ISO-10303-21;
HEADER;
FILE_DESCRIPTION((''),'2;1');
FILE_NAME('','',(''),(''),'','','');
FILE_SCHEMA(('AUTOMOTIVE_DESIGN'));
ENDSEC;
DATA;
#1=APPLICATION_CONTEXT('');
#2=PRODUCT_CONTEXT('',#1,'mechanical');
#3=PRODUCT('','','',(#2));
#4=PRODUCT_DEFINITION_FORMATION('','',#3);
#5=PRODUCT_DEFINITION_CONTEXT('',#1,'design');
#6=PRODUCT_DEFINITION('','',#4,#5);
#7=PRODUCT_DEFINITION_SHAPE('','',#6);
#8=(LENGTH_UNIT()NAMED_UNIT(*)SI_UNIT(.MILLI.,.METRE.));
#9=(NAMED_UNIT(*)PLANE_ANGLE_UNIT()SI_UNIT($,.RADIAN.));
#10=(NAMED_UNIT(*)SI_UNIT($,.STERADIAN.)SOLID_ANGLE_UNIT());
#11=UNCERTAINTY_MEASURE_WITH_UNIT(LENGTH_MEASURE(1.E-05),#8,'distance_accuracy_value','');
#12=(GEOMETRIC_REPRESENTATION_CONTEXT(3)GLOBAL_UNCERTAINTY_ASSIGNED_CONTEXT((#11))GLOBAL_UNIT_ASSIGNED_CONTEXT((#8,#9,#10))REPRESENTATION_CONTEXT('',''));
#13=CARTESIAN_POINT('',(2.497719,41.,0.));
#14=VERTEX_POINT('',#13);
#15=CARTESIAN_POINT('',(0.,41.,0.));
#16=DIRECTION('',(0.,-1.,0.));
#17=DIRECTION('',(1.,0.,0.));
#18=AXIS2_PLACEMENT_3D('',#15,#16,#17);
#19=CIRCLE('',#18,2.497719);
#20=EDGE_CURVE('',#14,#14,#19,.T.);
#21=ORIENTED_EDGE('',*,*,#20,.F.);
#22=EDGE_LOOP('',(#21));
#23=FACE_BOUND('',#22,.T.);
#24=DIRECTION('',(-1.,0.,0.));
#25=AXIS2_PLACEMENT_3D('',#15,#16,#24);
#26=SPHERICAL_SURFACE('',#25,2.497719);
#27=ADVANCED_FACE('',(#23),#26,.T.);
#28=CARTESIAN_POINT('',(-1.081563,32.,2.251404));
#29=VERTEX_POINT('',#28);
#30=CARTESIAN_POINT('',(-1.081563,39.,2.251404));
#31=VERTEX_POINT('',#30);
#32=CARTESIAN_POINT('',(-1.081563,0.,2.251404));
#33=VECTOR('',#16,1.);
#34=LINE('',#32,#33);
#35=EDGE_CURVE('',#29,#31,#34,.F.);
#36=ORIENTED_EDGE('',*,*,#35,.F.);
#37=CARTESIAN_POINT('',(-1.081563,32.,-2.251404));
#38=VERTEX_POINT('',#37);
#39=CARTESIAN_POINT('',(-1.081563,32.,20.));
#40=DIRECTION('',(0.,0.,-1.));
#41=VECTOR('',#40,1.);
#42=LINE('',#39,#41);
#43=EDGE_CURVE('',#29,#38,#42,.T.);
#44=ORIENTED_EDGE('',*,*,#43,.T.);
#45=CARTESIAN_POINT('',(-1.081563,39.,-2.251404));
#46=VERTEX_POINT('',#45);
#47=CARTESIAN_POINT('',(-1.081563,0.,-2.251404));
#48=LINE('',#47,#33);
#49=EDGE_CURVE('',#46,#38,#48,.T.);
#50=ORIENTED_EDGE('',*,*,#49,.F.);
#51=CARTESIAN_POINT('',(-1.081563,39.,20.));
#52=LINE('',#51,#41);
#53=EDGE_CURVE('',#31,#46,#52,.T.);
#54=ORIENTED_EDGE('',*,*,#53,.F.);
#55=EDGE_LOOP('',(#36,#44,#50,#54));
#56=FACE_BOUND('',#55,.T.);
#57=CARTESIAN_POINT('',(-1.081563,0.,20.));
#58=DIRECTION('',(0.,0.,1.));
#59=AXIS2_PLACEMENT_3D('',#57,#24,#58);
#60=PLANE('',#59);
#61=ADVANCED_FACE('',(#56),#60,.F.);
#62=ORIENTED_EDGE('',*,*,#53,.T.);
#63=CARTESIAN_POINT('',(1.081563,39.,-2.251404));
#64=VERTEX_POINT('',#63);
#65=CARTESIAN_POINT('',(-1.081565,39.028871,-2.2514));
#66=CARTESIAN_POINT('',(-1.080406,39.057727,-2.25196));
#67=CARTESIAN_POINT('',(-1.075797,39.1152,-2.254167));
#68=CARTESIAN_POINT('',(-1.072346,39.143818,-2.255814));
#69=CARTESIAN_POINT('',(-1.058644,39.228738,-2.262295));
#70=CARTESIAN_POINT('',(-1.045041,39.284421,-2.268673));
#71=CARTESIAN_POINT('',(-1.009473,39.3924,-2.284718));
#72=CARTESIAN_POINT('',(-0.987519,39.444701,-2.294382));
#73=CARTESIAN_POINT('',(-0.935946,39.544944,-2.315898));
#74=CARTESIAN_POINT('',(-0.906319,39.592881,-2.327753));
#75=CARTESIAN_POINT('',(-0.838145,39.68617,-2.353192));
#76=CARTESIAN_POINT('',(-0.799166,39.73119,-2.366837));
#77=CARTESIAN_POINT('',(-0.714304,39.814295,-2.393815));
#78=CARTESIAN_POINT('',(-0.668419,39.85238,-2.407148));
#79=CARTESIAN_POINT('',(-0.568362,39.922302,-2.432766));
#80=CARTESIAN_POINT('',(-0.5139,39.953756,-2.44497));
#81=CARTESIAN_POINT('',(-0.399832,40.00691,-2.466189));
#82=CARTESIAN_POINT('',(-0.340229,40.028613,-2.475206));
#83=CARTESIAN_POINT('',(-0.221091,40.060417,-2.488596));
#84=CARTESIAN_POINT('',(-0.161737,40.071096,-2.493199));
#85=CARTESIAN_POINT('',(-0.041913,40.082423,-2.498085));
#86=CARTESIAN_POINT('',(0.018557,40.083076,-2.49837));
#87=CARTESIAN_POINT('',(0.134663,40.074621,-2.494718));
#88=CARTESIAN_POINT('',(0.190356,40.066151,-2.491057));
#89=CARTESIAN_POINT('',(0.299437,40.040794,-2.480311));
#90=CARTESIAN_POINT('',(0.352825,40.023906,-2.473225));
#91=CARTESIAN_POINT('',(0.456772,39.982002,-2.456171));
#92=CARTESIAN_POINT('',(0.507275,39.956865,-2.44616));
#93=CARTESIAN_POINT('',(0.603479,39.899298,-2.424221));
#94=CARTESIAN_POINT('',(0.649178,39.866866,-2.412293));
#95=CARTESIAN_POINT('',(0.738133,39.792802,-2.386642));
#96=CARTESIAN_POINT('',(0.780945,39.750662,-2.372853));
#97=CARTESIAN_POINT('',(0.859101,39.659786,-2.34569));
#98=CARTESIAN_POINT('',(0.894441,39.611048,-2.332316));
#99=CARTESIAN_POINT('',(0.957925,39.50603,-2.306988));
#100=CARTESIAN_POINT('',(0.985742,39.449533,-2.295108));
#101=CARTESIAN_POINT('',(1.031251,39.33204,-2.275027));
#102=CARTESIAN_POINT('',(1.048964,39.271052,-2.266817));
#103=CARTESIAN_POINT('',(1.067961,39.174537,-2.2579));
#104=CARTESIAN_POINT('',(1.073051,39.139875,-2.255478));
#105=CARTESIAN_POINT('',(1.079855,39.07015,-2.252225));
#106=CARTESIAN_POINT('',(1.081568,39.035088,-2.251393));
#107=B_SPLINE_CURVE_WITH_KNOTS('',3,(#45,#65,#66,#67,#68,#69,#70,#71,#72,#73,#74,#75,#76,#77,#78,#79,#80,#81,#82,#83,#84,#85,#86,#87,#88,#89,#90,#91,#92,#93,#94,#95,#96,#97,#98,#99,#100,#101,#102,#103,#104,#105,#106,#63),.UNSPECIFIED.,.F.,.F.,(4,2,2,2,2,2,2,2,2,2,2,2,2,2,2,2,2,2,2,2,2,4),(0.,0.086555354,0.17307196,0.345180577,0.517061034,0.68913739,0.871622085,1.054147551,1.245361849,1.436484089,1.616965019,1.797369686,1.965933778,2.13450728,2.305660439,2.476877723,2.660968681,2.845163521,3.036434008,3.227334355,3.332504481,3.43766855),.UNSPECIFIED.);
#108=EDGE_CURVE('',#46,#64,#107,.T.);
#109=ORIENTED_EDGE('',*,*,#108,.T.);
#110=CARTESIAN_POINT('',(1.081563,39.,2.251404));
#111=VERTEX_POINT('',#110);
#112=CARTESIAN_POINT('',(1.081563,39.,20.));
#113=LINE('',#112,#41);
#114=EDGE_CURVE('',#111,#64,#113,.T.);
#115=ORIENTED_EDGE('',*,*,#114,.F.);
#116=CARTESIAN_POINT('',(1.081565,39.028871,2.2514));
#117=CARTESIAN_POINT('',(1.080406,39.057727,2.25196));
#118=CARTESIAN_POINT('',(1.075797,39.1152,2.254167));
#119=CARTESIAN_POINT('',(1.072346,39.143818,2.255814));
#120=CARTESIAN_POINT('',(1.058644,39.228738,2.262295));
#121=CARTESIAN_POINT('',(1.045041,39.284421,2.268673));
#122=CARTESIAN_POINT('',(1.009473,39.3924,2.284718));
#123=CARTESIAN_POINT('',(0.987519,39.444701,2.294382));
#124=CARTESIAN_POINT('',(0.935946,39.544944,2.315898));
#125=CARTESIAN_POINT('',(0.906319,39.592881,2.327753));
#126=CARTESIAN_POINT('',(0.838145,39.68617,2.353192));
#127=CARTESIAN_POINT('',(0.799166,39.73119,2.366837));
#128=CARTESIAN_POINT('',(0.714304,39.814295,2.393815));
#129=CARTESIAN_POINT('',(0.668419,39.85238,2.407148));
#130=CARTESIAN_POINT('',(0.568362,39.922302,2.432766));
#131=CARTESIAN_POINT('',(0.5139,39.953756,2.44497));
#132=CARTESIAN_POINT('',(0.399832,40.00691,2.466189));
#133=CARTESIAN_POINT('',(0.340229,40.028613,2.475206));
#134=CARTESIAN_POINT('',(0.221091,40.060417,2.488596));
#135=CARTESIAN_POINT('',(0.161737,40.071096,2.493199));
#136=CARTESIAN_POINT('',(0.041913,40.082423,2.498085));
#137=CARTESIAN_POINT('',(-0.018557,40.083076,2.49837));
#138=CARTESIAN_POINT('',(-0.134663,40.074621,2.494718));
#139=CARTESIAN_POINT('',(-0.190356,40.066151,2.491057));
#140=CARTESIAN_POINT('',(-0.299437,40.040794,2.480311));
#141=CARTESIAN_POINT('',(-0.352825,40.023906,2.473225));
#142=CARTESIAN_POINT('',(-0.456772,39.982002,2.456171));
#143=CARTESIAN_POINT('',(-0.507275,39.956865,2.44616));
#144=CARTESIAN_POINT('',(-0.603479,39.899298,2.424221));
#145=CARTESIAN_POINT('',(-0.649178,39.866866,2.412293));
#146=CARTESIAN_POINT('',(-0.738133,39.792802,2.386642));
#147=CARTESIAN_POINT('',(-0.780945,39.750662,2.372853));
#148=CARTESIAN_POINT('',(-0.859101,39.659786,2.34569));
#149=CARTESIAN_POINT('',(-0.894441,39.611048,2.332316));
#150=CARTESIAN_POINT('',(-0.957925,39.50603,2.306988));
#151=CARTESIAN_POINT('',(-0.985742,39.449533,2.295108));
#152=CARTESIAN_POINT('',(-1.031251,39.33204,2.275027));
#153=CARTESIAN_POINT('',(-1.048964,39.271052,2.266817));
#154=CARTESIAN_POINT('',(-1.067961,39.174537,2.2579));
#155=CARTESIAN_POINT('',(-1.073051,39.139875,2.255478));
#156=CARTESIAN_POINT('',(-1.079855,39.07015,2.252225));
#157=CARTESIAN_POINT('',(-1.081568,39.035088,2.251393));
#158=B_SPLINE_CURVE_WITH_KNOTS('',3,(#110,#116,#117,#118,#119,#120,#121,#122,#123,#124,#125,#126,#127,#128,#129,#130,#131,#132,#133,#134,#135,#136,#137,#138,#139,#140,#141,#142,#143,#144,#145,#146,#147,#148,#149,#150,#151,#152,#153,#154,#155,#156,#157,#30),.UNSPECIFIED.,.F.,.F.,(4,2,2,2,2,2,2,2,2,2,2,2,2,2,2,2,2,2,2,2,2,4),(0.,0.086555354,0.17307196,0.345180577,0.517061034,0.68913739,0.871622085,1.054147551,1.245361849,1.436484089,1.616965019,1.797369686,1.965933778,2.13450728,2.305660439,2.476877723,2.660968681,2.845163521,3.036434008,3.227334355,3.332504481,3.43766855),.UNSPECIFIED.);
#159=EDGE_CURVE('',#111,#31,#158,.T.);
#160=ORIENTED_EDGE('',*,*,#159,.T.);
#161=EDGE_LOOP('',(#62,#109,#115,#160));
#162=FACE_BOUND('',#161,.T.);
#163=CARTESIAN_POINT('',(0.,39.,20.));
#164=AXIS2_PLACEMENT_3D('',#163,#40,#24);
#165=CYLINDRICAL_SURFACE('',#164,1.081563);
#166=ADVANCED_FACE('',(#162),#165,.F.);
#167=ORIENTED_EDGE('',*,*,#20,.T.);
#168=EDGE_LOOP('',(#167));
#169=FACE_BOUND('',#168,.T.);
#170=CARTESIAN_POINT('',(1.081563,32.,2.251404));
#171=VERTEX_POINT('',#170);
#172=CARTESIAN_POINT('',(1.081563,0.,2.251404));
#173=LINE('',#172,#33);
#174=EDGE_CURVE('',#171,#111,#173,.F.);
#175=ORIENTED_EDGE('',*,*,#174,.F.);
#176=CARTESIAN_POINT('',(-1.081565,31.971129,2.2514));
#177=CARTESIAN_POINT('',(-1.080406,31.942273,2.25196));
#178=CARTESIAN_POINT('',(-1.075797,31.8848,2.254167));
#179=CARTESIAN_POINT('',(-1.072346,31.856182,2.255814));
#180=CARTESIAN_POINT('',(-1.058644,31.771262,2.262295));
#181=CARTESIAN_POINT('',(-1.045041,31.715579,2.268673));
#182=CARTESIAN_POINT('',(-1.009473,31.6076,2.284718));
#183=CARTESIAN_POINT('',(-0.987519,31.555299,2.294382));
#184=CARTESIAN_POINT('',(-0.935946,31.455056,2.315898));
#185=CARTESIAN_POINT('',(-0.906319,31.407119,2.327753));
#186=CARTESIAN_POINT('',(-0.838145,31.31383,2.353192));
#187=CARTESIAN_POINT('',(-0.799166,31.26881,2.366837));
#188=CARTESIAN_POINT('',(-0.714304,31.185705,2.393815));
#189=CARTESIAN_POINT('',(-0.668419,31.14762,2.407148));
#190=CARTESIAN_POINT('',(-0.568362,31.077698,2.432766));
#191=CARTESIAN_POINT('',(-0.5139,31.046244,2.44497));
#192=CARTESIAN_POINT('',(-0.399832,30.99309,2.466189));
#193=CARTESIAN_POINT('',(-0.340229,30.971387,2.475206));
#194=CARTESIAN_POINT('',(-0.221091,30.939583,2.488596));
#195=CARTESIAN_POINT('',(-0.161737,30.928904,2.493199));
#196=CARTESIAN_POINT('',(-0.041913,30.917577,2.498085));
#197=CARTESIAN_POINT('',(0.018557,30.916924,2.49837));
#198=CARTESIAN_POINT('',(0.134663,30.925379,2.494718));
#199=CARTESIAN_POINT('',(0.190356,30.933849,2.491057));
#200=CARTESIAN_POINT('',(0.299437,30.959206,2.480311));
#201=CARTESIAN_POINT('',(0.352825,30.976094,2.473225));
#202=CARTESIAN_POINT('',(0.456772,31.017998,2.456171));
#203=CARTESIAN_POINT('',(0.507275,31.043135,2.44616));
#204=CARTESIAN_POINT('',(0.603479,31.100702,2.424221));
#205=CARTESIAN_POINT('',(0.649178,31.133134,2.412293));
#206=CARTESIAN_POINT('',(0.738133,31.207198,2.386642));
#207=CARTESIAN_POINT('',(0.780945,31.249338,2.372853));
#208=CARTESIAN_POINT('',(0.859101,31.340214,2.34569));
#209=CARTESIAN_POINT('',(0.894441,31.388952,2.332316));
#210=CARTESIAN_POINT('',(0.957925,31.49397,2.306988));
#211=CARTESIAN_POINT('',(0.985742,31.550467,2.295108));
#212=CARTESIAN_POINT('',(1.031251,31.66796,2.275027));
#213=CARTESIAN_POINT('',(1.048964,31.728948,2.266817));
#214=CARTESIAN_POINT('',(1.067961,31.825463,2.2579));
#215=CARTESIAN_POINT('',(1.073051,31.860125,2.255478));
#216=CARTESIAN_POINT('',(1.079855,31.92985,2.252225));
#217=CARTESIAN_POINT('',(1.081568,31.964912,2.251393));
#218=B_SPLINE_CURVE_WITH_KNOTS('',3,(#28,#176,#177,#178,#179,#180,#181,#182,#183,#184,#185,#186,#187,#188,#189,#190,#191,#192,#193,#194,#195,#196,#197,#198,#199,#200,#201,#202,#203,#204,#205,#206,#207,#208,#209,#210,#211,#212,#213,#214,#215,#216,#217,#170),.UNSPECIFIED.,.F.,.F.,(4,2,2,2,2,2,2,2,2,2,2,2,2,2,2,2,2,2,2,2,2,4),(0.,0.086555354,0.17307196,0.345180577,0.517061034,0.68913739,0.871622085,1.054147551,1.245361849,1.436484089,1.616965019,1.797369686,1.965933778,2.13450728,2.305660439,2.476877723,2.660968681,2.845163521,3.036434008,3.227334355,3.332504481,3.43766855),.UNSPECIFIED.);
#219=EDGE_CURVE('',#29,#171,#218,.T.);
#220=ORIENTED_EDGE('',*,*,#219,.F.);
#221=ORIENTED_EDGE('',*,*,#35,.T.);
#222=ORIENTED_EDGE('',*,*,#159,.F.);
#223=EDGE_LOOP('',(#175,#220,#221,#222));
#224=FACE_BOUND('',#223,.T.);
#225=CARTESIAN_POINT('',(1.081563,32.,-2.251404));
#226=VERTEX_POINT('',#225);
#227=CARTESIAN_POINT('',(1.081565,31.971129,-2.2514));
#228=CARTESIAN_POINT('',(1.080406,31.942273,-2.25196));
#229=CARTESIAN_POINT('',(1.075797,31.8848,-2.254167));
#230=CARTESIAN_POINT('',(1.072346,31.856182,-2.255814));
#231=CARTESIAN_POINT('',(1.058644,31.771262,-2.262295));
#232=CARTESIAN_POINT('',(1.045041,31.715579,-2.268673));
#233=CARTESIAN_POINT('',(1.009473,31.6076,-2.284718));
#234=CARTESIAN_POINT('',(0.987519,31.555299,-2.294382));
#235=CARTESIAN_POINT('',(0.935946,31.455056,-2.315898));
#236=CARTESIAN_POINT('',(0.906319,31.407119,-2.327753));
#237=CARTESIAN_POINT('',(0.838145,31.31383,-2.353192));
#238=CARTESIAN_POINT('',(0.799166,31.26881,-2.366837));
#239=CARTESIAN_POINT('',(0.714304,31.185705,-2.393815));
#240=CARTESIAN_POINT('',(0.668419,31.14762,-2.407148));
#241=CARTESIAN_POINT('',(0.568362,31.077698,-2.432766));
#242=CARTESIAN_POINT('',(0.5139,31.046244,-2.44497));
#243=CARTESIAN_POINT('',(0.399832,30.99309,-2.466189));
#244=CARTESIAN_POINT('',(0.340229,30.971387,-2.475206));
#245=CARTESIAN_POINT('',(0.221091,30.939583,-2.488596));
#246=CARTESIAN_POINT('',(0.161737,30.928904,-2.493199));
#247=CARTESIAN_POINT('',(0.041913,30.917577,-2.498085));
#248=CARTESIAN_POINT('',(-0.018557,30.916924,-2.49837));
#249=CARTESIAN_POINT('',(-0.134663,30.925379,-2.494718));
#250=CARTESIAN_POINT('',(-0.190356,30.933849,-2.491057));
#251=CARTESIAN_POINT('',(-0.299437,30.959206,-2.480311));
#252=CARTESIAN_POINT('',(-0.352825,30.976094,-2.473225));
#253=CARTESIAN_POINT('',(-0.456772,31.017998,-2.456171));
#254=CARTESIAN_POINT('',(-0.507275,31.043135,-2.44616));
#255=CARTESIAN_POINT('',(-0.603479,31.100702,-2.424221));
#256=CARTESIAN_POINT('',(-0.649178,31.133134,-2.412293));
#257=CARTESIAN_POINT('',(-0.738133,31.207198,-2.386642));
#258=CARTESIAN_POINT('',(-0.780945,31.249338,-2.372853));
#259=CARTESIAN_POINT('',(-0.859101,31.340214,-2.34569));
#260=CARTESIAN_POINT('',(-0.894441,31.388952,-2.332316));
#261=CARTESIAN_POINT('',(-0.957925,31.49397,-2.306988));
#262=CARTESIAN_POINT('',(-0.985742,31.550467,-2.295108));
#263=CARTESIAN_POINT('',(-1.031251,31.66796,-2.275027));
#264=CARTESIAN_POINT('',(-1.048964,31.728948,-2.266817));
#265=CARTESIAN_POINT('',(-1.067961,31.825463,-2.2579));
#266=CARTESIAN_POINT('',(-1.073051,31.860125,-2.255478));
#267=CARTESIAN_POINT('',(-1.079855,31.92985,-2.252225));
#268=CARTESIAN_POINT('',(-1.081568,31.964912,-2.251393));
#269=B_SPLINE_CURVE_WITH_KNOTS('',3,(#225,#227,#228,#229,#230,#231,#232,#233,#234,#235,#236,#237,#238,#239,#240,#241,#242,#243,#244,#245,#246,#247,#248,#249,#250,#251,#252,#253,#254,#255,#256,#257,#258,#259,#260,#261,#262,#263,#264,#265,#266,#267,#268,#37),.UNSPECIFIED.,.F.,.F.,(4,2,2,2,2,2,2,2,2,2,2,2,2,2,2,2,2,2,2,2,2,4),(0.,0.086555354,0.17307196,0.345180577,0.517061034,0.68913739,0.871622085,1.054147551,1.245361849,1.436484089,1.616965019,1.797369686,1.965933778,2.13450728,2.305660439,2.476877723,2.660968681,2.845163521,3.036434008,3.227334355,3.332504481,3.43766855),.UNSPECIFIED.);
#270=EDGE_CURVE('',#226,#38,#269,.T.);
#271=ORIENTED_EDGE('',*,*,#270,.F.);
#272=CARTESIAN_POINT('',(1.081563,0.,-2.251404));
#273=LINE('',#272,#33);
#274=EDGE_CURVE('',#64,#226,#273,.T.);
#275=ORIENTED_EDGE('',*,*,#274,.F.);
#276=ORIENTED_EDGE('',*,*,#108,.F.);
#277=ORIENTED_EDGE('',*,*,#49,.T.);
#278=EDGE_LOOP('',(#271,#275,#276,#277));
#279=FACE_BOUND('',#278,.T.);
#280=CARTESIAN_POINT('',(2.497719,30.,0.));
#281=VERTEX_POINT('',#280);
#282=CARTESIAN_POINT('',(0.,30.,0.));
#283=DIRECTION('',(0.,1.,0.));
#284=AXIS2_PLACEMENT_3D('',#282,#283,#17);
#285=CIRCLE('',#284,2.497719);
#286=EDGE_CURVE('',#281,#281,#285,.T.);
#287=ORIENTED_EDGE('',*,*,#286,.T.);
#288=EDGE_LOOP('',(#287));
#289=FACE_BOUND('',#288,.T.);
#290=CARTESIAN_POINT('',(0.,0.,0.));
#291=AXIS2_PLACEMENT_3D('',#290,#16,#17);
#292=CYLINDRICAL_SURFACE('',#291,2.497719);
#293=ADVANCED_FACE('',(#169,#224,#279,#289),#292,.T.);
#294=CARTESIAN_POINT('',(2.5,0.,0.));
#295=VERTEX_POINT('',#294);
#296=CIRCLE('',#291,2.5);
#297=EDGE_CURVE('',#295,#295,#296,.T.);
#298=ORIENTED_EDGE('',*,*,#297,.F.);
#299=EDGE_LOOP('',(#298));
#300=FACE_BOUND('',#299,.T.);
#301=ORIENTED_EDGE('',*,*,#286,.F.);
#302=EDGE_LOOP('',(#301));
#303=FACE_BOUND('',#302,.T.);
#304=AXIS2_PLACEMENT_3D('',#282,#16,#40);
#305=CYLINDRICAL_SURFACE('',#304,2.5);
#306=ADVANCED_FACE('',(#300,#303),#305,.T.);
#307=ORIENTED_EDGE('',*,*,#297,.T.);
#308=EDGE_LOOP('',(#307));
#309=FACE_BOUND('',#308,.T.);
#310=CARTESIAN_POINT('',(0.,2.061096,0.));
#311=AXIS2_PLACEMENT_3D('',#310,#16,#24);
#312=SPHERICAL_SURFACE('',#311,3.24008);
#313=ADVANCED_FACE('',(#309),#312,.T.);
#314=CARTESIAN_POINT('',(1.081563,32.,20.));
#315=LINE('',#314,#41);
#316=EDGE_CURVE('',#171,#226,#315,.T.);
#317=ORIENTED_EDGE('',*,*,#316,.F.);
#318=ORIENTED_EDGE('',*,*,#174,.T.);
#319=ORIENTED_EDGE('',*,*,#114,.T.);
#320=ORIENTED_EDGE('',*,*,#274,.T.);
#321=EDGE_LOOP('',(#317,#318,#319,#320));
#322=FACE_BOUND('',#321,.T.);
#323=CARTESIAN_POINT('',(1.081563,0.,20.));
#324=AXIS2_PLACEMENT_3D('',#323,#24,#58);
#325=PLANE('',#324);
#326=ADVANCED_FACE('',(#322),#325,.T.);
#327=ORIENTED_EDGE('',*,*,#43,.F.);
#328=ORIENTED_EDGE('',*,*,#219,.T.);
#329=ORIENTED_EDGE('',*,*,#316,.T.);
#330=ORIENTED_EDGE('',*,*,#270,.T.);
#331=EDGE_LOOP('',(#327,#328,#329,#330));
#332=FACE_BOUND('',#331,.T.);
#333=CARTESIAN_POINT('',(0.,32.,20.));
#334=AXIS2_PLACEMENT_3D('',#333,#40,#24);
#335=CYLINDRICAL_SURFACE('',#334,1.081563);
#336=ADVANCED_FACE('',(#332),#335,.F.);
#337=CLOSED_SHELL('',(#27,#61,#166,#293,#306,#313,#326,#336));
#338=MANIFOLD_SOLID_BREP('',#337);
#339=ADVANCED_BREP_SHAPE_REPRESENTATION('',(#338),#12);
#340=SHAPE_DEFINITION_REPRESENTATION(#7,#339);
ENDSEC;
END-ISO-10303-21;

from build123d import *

# Parameters (mm, degrees)
SZKIC2_R                        = 2.5
DODANIE_WYCI_GNI_CIE1_DEPTH     = 30
WYTNIJ_WYCI_GNI_CIE1_DEPTH      = 20
WYTNIJ_WYCI_GNI_CIE1_DEPTH_BACK = 20


with BuildPart() as part:
    # Szkic2 → Dodanie-wyciągnięcie1 (new body)
    with BuildSketch(Plane(origin=(0, 0, 0), x_dir=(1, 0, 0), z_dir=(0, 1, 0))):
        Circle(SZKIC2_R)
    extrude(amount=DODANIE_WYCI_GNI_CIE1_DEPTH)

    # Szkic3 → Obrót2 (revolve)
    with BuildSketch(Plane.XY):
        with BuildLine():
            Line((-2.497718644, 41), (-2.497718644, 30))
            Line((-2.497718644, 30), (0, 30))
            Line((0, 30), (0, 43.497718644))
            ThreePointArc((0, 43.497718644), (-1.766153791, 42.766153791), (-2.497718644, 41))
        make_face()
    revolve(axis=Axis((0, 0, 0), (0, 1, 0)))

    # Szkic3<3> → Wytnij-wyciągnięcie1 (cut, two sides: drawn at the far end of the back side and taken through both)
    with BuildSketch(Plane.XY.offset(-WYTNIJ_WYCI_GNI_CIE1_DEPTH_BACK)):
        with BuildLine():
            ThreePointArc((-1.081563109, 32), (0, 30.918436891), (1.081563109, 32))
            Line((1.081563109, 32), (1.081563109, 39))
            ThreePointArc((1.081563109, 39), (0, 40.081563109), (-1.081563109, 39))
            Line((-1.081563109, 39), (-1.081563109, 32))
        make_face()
    extrude(amount=WYTNIJ_WYCI_GNI_CIE1_DEPTH + WYTNIJ_WYCI_GNI_CIE1_DEPTH_BACK, mode=Mode.SUBTRACT)

    # Szkic4 → Obrót3 (revolve)
    with BuildSketch(Plane.XY):
        with BuildLine():
            ThreePointArc((-2.5, 0), (-1.382027756, -0.869452827), (0, -1.178983829))
            Line((0, -1.178983829), (0, 0))
            Line((0, 0), (-2.5, 0))
        make_face()
    revolve(axis=Axis((0, -1.178983829, 0), (0, 1, 0)))


solid = part.part
